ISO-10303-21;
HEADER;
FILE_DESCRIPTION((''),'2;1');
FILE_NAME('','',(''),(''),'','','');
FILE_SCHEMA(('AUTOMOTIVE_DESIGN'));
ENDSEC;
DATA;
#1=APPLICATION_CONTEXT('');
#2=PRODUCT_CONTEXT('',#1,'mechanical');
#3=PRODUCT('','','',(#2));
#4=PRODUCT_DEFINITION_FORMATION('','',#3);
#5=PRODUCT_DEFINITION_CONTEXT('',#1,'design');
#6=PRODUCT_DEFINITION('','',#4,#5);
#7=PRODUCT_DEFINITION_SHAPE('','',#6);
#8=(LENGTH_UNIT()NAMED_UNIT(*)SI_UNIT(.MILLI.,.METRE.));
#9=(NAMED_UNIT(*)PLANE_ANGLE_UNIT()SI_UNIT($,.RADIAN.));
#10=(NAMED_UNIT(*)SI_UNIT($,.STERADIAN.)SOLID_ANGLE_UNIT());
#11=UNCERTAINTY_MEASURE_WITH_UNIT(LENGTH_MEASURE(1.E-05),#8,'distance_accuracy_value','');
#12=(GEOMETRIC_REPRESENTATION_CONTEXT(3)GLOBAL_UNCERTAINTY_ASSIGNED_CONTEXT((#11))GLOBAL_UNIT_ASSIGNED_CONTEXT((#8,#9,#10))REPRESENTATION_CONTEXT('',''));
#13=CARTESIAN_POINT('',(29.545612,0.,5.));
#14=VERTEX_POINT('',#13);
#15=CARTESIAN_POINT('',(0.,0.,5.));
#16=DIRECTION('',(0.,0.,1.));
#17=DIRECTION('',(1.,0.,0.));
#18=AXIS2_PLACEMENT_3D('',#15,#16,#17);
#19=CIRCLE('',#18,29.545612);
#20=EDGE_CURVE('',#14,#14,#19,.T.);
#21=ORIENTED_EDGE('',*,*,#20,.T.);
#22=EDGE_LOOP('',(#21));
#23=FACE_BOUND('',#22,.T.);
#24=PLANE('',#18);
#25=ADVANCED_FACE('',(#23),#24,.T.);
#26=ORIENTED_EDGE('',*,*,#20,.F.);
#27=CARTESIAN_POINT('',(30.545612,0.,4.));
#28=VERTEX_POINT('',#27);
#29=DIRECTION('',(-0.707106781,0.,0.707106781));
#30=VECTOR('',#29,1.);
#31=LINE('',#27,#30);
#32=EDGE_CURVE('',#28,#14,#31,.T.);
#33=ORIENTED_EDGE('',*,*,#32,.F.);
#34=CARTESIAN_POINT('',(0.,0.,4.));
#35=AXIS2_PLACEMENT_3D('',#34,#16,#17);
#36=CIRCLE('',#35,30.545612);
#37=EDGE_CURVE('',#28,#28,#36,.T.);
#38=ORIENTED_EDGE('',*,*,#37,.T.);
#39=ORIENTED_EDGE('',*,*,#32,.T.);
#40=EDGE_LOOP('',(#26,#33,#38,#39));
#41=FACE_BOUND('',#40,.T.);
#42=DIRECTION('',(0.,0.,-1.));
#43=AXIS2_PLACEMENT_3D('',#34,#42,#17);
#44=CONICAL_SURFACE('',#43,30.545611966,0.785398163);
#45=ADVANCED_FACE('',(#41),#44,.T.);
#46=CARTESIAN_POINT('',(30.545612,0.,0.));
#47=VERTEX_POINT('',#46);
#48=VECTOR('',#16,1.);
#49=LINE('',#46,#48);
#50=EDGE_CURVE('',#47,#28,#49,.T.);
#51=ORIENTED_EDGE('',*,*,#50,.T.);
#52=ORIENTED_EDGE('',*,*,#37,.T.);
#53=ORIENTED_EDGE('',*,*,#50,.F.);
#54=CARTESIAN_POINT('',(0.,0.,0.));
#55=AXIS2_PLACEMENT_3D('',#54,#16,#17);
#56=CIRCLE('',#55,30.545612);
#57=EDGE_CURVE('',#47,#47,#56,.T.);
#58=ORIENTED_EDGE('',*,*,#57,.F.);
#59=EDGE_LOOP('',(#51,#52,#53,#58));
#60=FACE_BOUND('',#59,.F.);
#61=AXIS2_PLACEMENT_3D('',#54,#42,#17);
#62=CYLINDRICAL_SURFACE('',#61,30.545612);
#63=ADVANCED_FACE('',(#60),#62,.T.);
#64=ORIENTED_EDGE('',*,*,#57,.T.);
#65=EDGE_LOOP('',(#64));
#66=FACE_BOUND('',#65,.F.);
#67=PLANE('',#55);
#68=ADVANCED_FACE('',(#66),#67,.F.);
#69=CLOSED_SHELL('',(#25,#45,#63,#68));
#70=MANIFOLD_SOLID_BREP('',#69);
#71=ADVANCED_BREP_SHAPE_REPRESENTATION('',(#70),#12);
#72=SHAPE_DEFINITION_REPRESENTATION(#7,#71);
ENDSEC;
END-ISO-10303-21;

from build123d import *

# Parameters (mm, degrees)
F0_R     = 30.5456119657
F1_DEPTH = 5
F2_SIZE  = 1


# Not quite as in the source:
# - the program builds the solid bodies; features that only make, move or delete a surface that nothing else refers to are left out


with BuildPart() as f1:
    # F0 (on Top) → F1 (new body)
    with BuildSketch(Plane.XY):
        Circle(F0_R)
    extrude(amount=F1_DEPTH)

    # F2
    f2_edges = [f1.edges().sort_by_distance(p)[0] for p in [
        (-30.545612, 0, 5),
    ]]
    chamfer(f2_edges, length=F2_SIZE)


solid = f1.part
